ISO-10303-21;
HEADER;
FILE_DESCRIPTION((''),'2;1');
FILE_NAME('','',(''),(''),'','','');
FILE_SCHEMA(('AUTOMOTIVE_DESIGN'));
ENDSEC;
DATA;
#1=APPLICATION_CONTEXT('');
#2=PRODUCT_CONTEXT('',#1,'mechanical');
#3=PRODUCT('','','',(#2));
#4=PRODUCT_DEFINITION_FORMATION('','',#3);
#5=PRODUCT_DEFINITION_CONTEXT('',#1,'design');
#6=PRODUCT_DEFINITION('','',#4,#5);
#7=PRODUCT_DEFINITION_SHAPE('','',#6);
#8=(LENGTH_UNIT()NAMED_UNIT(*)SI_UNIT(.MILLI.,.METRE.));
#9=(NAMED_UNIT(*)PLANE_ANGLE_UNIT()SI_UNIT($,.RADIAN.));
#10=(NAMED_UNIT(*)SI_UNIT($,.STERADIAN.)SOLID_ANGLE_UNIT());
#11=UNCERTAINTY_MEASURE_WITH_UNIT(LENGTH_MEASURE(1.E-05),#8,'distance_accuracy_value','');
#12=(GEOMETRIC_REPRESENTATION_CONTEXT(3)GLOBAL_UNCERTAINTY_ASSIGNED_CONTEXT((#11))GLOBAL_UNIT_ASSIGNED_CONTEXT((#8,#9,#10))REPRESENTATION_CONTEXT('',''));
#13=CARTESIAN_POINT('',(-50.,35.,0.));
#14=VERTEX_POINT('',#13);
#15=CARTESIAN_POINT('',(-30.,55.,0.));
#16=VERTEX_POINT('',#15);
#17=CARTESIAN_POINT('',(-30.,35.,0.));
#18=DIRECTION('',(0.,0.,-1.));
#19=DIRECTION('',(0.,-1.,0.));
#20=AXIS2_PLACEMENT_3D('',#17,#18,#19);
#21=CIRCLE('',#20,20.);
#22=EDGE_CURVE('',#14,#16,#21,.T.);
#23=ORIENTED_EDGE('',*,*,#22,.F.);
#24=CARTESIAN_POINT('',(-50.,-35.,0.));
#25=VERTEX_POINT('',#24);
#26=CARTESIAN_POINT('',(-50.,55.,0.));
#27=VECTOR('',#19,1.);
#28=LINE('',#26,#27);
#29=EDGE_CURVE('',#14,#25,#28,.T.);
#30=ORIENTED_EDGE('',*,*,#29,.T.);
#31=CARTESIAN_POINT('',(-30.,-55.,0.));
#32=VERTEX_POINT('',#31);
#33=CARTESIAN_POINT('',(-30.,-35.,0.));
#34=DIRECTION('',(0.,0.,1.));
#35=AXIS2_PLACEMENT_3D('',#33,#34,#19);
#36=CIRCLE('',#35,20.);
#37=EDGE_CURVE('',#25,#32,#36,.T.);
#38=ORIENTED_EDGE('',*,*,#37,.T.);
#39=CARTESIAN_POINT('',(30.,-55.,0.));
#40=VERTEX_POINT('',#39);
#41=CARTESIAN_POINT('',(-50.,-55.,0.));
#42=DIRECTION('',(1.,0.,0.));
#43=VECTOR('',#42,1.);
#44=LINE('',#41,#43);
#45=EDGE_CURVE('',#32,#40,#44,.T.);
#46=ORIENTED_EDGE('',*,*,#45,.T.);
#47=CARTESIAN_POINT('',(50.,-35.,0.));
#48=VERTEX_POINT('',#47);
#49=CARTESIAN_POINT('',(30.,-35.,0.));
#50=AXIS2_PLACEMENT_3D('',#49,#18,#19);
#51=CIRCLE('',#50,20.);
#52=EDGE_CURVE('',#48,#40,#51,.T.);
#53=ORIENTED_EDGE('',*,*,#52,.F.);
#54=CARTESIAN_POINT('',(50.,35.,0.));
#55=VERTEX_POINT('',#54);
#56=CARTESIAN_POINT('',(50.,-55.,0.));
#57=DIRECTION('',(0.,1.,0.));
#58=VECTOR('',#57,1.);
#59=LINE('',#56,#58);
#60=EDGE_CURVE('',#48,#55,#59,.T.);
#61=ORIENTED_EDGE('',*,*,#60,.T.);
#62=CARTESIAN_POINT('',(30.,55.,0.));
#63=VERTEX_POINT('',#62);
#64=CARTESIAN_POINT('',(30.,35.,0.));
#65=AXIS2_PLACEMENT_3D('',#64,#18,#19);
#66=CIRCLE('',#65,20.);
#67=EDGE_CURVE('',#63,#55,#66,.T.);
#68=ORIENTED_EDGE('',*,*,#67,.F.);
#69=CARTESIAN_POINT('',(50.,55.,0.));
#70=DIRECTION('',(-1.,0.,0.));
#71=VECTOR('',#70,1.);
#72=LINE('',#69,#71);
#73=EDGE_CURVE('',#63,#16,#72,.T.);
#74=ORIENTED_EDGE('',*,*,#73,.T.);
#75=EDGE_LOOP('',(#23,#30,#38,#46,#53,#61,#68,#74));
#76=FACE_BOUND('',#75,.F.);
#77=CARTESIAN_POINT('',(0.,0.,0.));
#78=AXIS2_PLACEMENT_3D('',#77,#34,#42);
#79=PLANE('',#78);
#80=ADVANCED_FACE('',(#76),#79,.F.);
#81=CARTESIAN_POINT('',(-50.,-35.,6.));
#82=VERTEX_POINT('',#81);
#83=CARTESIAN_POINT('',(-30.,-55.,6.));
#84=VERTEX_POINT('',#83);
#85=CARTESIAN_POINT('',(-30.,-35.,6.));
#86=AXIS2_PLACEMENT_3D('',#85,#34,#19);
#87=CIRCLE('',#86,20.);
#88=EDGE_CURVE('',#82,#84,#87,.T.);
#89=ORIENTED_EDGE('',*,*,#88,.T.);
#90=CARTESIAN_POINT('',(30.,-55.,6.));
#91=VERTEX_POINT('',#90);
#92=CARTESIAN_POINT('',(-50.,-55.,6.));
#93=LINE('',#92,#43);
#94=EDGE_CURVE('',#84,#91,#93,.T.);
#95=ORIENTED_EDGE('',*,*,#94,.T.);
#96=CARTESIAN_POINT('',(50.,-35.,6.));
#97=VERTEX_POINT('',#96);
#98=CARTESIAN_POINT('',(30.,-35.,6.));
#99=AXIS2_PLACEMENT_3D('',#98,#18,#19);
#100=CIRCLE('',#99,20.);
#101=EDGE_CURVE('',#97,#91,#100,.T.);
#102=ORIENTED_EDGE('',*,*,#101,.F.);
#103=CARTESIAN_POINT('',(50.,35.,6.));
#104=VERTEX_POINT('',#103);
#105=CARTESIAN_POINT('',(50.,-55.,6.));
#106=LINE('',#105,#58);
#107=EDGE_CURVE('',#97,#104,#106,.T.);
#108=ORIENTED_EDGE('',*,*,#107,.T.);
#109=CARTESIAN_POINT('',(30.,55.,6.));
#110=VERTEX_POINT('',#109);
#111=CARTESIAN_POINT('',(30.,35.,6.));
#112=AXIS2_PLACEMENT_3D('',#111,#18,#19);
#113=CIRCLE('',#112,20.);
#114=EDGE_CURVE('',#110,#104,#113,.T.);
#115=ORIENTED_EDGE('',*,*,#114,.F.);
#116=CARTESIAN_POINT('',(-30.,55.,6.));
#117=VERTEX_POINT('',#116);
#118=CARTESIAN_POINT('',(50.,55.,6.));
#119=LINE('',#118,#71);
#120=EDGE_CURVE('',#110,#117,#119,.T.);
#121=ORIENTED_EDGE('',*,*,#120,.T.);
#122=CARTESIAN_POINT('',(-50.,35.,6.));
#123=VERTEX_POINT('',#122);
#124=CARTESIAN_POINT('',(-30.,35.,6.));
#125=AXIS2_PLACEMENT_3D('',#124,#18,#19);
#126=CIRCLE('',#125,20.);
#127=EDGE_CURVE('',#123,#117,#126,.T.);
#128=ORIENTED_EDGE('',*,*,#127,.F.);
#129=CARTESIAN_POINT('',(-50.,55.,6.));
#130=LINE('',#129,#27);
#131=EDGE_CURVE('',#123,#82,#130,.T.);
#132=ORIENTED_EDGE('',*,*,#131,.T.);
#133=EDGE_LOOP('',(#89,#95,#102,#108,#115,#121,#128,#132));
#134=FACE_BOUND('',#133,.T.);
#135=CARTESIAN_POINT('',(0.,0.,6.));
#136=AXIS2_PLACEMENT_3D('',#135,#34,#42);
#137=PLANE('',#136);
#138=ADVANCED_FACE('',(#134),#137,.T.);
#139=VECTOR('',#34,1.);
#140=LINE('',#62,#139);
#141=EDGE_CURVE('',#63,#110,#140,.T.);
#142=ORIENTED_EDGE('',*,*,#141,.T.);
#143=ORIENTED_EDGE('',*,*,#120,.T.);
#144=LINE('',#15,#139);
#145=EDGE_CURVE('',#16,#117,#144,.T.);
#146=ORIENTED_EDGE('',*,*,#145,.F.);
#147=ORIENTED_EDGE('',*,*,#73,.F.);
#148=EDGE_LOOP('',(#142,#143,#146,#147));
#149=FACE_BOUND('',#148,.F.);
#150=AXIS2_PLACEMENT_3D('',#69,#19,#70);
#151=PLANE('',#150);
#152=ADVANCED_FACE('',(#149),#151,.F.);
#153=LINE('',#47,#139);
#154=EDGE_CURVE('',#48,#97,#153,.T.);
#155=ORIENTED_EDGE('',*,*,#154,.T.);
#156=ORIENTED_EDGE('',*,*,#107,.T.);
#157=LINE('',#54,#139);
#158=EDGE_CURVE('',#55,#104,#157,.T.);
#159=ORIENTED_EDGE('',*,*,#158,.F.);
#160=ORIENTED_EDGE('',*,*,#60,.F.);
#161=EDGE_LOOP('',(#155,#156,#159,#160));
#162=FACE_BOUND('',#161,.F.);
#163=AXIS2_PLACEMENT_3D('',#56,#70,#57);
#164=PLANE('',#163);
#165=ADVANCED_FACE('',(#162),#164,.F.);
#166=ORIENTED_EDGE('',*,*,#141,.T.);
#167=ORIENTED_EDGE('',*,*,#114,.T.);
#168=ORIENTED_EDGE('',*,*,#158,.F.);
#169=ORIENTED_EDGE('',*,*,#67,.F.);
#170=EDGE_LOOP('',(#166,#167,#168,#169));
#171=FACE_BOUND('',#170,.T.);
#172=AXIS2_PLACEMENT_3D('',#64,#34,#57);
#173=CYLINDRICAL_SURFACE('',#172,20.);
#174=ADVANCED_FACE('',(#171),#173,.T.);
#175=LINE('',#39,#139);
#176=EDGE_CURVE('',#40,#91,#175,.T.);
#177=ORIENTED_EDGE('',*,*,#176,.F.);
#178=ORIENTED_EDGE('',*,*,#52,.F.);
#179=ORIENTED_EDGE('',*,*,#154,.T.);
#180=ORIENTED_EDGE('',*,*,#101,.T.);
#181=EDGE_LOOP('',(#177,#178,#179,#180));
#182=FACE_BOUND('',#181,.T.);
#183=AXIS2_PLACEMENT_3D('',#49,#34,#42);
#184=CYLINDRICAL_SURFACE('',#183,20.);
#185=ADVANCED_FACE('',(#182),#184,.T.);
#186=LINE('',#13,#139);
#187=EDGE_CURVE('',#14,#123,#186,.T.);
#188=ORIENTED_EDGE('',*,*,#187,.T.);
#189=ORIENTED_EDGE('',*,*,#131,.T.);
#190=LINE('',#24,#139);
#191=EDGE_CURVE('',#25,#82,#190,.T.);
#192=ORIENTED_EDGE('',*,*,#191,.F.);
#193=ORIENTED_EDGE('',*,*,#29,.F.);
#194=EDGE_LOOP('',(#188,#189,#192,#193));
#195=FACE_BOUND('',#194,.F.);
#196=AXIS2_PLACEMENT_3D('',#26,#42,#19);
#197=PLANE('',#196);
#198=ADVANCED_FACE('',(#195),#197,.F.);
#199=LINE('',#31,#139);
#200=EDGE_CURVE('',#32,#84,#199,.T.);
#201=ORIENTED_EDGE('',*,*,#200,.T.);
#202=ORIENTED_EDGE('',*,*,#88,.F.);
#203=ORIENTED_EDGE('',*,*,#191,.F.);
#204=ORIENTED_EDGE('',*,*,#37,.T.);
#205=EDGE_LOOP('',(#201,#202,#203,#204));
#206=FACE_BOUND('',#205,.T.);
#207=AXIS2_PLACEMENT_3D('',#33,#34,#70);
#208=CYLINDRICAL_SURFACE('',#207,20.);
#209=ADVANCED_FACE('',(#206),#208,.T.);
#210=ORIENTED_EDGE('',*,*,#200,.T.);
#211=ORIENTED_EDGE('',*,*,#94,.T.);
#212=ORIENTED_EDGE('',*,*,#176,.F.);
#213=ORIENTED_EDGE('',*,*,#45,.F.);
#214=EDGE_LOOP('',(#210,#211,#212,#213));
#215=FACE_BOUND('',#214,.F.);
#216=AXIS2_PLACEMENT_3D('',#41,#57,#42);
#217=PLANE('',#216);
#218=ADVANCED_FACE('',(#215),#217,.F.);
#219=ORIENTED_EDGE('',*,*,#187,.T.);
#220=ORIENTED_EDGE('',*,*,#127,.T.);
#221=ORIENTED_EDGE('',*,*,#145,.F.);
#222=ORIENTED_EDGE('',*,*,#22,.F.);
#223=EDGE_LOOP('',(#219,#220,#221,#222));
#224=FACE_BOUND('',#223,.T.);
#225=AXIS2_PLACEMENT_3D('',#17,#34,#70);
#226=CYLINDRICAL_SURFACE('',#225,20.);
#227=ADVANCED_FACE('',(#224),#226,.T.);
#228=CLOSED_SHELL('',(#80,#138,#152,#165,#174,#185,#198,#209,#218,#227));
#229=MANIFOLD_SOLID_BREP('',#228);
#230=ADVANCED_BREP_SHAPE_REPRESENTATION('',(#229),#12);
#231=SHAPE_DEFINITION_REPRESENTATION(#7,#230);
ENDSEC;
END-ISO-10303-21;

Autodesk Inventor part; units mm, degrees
ref_plane "YZ Plane" through (0, 0, 0) normal (1, 0, 0) x (0, 1, 0)
ref_plane "XZ Plane" through (0, 0, 0) normal (0, 1, 0) x (-1, 0, 0)
ref_plane "XY Plane" through (0, 0, 0) normal (0, 0, 1) x (1, 0, 0)
sketch "Sketch1" plane through (0, 0, 0) normal (0, 0, 1) x (1, 0, 0)
  line L0 (-50, -55) -> (50, -55)
  line L1 (50, -55) -> (50, 55)
  line L2 (50, 55) -> (-50, 55)
  line L3 (-50, 55) -> (-50, -55)
  line L4 (-50, -55) -> (50, 55) construction
  line L5 (50, -55) -> (-50, 55) construction
  point P0 (0, 0)
  dimension "d0" = 100
  dimension "d1" = 110
extrude "Plate1" add sketch "Sketch1" along normal blind 6
fillet "Corner Round1" radius 20 4 edges at (50, -55, 3) (-50, -55, 3) (-50, 55, 3) (50, 55, 3)
sketch "Sketch5" plane through (0, 0, 6) normal (0, 0, 1) x (1, 0, 0)
  line L0 (50, 35) -> (50, -35) projected
  line L1 (50, 25) -> (-50, 25)
  line L2 (-50, -35) -> (-50, 35) projected
  line L3 (-30, 55) -> (30, 55) projected
  point P0 (0, 0)
  dimension "d23" = 30
feature "Fold1" [suppressed]
equation "\"d2\" = Thickness"
equation "\"d24\" = BendReliefWidth"
equation "\"d25\" = BendReliefDepth"
equation "\"d26\" = MinimumRemnant"
equation "\"d27\" = TransitionRadius"
equation "\"d29\" = BendRadius"
equation "\"BendReliefWidth\" = Thickness"
equation "\"BendReliefDepth\" = 0.5 * Thickness"
equation "\"CornerReliefSize\" = 4 * Thickness"
equation "\"MinimumRemnant\" = 2 * Thickness"
equation "\"TransitionRadius\" = BendRadius"
equation "\"JacobiRadiusSize\" = BendRadius"
equation "\"GapSize\" = Thickness"
equation "\"Thickness\" = 6"
equation "\"BendRadius\" = 5"
properties part number "PRS 940-93 leg plate for filter" material "Stainless Steel"
